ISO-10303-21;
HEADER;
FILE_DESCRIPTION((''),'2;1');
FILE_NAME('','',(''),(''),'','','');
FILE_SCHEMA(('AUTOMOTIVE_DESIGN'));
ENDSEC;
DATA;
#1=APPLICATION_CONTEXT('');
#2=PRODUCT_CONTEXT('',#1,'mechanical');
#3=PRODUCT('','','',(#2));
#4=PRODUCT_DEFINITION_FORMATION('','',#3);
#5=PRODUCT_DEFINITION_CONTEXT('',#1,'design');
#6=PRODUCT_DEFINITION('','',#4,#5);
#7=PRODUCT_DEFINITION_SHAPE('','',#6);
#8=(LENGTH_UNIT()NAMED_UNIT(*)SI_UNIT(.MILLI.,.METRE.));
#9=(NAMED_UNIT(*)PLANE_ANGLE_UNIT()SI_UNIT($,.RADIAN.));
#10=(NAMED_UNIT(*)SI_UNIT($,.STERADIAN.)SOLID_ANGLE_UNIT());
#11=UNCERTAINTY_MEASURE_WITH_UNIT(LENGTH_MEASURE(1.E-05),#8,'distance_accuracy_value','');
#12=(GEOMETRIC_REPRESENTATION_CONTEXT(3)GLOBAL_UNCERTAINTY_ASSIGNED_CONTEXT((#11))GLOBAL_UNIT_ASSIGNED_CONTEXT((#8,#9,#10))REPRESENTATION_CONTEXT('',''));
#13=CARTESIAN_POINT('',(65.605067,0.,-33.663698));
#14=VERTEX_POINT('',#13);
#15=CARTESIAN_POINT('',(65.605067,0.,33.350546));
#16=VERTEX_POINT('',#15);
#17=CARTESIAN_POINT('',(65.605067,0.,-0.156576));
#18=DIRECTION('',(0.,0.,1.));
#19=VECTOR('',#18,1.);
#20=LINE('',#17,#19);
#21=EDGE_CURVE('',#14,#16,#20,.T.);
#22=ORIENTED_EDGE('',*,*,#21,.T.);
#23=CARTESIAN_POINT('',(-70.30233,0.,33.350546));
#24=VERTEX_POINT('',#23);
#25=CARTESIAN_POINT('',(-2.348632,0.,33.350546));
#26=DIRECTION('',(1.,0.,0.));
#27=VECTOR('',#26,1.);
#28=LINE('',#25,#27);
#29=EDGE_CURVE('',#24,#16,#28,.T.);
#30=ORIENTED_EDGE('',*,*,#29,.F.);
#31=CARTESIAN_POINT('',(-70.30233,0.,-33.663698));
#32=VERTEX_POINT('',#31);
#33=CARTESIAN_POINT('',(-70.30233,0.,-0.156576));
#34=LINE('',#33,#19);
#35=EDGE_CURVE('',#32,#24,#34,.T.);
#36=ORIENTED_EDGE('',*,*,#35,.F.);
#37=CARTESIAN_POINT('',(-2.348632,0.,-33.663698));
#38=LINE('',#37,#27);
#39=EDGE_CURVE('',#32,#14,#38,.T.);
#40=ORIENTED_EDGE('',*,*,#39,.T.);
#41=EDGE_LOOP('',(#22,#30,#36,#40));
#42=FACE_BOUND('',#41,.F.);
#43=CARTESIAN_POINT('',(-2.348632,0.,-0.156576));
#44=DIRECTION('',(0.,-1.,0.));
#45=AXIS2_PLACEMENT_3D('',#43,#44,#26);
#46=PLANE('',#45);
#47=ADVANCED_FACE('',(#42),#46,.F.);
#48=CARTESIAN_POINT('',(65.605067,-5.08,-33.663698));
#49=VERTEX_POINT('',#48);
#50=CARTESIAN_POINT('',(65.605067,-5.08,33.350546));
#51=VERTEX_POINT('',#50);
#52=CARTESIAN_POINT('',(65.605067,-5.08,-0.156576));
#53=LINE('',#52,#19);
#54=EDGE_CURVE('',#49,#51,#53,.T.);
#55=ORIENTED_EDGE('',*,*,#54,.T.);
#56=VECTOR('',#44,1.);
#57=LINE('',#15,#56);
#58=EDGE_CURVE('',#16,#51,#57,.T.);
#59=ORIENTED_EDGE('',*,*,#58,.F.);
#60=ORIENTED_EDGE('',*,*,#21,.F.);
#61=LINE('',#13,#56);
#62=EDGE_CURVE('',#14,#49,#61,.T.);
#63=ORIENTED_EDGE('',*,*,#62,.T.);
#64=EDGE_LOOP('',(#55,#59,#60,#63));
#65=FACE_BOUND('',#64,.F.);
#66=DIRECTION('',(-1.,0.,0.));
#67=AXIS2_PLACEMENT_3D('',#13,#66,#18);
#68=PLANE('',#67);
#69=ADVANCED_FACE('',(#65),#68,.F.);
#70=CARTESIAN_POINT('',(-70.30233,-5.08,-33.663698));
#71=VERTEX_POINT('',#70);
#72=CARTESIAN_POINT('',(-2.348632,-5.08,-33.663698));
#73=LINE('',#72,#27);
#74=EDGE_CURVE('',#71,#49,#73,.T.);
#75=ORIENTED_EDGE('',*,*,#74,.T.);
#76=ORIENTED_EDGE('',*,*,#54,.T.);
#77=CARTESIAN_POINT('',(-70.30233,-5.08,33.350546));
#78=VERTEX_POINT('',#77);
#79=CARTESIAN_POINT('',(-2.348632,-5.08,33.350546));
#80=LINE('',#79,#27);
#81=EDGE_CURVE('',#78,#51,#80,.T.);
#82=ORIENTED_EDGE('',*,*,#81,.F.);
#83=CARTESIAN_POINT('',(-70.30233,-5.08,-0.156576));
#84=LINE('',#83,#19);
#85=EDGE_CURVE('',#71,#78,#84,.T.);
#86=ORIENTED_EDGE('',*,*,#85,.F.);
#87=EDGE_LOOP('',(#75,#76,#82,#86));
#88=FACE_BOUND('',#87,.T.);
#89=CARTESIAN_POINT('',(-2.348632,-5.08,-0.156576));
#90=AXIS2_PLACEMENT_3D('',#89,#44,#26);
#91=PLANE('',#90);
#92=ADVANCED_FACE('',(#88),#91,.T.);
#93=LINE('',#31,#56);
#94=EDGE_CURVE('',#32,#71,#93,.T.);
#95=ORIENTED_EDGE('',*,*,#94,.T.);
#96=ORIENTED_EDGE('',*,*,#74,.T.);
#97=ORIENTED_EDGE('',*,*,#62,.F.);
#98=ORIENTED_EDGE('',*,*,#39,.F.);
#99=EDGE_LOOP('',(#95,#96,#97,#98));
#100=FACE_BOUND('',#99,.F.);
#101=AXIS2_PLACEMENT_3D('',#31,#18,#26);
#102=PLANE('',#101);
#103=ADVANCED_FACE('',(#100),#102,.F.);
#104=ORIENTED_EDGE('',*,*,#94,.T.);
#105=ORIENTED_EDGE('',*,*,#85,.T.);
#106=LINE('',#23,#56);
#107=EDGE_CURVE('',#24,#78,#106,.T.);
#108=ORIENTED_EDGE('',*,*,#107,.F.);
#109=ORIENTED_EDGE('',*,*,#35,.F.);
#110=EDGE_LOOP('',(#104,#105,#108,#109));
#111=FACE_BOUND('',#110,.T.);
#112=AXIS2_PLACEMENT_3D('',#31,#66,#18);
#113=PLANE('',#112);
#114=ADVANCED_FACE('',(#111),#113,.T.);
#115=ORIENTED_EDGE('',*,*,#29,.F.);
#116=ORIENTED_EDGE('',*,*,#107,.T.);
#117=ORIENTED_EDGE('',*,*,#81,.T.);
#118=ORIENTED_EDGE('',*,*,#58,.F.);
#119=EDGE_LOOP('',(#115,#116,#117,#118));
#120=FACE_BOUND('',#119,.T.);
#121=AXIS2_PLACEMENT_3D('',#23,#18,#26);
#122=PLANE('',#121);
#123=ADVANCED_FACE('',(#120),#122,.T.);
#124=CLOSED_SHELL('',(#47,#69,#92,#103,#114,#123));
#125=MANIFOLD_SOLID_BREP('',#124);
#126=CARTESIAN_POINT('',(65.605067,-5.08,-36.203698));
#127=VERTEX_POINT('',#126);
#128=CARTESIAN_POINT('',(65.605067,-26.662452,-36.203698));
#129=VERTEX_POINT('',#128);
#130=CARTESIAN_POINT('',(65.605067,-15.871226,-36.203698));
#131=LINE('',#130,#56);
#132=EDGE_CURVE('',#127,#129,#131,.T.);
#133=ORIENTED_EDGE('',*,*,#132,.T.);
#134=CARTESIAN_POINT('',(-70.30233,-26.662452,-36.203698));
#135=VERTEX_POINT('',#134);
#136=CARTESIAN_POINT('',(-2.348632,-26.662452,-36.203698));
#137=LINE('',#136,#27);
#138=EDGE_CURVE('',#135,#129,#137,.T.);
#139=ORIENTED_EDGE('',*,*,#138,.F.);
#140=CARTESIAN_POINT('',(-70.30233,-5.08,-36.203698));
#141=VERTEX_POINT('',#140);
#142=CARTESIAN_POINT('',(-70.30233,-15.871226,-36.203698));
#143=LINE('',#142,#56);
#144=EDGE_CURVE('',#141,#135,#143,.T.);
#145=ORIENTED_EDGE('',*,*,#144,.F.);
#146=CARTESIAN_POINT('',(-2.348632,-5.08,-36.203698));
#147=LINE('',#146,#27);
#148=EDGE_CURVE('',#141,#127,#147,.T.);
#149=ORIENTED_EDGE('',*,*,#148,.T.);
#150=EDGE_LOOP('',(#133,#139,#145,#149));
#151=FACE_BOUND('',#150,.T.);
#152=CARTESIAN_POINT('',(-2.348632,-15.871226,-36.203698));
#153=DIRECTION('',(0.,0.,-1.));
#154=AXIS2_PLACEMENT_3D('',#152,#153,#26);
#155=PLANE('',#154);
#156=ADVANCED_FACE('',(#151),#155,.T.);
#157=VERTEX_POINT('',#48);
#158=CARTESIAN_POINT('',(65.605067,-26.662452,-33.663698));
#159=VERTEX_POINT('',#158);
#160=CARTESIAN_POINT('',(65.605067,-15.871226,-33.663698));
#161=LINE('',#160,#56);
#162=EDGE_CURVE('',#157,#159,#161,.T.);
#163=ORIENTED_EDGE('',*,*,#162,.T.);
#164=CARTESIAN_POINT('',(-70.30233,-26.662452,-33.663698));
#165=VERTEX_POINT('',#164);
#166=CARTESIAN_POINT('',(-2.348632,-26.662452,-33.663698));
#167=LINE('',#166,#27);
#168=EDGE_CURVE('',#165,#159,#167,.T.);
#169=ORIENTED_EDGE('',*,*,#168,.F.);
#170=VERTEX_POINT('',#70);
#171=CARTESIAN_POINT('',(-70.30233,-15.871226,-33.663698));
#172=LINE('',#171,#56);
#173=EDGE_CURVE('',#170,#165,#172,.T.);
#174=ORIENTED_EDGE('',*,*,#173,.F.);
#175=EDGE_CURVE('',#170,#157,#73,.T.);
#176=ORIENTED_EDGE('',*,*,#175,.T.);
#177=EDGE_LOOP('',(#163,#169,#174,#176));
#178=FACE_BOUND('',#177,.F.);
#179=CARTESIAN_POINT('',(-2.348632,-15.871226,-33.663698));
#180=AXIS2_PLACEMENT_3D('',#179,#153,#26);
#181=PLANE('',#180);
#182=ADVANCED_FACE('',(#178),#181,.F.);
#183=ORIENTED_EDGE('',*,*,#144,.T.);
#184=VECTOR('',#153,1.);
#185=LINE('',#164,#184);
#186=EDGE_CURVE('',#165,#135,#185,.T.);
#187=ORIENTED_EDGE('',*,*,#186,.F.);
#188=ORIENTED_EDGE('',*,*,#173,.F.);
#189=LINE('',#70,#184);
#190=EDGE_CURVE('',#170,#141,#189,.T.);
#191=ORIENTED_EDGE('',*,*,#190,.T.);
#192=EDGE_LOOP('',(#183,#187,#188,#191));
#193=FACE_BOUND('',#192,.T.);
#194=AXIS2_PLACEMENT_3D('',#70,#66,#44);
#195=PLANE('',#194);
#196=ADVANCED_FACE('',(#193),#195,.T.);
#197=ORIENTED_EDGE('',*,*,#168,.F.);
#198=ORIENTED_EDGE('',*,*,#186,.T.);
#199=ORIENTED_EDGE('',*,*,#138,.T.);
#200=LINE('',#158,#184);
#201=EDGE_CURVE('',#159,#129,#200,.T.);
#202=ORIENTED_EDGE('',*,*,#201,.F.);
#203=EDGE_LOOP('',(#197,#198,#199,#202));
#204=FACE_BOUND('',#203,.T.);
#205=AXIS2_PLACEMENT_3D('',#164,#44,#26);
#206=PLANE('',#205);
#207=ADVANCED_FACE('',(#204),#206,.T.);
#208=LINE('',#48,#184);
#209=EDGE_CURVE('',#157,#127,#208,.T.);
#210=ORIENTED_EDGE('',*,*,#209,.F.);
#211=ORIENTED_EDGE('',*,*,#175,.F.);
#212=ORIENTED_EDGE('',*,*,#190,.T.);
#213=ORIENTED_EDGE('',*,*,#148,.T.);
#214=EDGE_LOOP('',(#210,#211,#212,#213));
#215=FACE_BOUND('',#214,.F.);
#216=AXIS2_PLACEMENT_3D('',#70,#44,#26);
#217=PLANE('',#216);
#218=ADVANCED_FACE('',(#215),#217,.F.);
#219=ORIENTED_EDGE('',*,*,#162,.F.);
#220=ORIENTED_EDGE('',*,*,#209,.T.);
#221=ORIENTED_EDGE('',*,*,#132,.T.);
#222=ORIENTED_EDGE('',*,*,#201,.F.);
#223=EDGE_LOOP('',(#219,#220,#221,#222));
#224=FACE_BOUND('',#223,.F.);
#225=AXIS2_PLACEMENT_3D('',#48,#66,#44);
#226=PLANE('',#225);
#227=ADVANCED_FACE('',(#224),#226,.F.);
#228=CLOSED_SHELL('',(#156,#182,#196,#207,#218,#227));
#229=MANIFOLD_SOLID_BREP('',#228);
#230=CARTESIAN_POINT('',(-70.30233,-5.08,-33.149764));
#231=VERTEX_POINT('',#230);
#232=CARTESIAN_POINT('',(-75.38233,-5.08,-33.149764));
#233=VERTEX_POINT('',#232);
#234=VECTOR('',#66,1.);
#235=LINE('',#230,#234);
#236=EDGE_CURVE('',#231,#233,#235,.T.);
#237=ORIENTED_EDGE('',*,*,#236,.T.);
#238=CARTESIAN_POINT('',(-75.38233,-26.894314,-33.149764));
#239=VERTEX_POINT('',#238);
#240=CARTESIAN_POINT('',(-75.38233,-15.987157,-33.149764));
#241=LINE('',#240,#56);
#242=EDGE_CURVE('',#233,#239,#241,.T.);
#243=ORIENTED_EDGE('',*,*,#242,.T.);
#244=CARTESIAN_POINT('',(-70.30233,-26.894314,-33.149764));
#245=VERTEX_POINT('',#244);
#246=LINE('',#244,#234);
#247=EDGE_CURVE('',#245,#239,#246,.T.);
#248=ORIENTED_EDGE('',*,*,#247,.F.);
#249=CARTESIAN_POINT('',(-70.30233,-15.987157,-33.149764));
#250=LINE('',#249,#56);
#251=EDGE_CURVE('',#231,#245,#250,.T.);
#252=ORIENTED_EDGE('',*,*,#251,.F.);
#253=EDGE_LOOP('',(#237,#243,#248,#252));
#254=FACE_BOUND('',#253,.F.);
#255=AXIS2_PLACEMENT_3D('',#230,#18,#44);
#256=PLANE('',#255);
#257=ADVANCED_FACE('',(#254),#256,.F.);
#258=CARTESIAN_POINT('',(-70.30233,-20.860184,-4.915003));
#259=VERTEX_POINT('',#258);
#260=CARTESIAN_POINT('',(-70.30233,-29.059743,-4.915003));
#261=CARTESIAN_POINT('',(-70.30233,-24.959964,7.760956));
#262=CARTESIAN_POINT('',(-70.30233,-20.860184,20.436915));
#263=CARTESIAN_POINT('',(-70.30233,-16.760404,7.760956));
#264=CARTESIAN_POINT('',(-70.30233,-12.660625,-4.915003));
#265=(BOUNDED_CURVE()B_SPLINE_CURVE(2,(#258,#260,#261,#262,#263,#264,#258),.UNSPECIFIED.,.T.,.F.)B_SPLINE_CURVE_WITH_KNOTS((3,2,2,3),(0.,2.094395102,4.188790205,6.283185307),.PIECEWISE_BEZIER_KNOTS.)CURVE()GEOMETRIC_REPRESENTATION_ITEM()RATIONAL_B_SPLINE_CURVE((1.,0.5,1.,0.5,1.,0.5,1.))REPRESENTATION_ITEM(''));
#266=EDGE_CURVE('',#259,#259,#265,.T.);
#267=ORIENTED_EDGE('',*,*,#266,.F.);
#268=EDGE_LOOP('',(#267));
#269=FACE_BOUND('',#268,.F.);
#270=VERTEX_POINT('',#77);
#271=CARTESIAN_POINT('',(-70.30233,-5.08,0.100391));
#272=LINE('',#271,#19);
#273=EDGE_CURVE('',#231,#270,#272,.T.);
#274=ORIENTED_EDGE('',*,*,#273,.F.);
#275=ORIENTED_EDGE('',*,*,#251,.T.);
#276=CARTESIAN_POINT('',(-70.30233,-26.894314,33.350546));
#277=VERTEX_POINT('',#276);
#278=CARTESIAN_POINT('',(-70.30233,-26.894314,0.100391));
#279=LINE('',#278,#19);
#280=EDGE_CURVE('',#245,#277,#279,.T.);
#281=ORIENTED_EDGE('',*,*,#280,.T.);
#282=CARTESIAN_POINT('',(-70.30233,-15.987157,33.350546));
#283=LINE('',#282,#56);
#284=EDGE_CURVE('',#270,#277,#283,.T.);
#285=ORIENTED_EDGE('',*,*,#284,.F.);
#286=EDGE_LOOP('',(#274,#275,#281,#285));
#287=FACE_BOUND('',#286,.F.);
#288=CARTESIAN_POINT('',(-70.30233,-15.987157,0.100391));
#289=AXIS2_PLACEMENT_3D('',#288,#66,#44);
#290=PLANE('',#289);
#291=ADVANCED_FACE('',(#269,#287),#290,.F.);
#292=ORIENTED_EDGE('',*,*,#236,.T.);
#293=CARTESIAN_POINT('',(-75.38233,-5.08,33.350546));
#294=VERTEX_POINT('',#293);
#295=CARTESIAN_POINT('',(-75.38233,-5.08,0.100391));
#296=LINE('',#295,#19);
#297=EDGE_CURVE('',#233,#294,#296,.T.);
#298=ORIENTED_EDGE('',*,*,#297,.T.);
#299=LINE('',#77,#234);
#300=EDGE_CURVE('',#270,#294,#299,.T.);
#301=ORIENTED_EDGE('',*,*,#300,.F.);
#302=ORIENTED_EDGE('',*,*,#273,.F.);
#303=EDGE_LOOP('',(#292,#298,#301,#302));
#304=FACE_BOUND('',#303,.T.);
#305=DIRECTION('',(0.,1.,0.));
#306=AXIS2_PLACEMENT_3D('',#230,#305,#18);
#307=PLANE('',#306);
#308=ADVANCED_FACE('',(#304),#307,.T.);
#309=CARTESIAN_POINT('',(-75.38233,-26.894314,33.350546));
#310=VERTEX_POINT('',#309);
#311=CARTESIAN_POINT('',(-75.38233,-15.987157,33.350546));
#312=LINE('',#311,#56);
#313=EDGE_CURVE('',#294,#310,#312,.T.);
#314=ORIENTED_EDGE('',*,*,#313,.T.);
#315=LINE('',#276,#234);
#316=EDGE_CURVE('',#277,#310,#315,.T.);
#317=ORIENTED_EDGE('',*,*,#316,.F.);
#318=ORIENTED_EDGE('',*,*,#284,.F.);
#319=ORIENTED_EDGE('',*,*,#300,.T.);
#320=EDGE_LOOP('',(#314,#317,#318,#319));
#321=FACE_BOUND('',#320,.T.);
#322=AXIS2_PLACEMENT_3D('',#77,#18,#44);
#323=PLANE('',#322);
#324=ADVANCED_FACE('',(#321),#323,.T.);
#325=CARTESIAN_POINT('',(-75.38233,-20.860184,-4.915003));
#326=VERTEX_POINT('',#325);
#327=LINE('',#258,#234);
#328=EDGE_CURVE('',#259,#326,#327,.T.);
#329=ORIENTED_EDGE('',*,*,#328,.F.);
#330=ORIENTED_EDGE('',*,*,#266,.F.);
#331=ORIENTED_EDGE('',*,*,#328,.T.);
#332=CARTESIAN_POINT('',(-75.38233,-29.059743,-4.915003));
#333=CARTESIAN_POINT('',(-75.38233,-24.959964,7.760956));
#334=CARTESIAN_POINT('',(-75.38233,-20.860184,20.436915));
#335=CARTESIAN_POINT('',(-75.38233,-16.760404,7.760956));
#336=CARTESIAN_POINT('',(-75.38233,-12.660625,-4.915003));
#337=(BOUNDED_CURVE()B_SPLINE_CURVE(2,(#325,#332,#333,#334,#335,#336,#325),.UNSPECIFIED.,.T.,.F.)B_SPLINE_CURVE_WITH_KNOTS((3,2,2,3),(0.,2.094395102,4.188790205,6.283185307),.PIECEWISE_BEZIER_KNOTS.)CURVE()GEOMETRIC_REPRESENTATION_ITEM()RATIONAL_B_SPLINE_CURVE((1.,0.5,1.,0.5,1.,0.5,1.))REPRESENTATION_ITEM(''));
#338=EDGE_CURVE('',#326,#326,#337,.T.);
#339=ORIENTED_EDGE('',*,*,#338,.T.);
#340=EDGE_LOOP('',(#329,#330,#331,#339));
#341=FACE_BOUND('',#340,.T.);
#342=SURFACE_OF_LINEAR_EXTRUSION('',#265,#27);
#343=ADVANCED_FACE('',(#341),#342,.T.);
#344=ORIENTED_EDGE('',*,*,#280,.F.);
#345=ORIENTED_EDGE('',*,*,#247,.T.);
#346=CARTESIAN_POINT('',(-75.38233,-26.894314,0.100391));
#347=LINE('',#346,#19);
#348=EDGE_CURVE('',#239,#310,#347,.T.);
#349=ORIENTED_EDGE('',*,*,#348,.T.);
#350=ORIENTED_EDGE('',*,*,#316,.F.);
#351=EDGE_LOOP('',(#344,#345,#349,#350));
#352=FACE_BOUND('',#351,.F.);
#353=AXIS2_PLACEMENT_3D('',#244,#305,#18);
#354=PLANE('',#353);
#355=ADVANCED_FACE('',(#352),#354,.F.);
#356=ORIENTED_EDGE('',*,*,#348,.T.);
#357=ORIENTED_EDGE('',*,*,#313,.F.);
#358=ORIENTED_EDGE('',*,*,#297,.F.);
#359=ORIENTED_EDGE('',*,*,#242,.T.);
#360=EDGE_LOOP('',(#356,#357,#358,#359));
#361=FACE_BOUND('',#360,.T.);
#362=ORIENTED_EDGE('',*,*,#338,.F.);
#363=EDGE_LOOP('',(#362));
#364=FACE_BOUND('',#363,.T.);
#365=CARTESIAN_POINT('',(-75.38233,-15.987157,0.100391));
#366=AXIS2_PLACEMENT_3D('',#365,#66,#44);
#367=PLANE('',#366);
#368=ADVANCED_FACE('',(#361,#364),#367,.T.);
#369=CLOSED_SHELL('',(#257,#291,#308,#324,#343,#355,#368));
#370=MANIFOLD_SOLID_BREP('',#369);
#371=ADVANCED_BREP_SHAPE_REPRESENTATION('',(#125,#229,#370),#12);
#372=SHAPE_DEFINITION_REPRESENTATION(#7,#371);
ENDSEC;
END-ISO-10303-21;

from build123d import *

# Parameters (mm, degrees)
F0_W     = 135.9073966742
F0_H     = 67.0142434537
F1_DEPTH = 5.08
F2_W     = 21.8143142146
F2_H     = 66.5003098547
F3_DEPTH = 5.08
F5_W     = 135.9073966742
F5_H     = 21.5824521464
F6_DEPTH = 2.54


# Not quite as in the source:
# - the program builds the solid bodies; features that only make, move or delete a surface that nothing else refers to are left out


with BuildPart() as f1:
    # F0 (on Front) → F1 (new body)
    with BuildSketch(Plane.XZ):
        with Locations((-2.3486316204, -0.1565758139)):
            Rectangle(F0_W, F0_H)
    extrude(amount=F1_DEPTH)


with BuildPart() as f3:
    # F2 (on face) → F3 (new body)
    with BuildSketch(Plane(origin=(-70.3023299575, 0, 0), x_dir=(0, -1, 0), z_dir=(-1, 0, 0))):
        with Locations((15.9871571073, 0.1003909856)):
            Rectangle(F2_W, F2_H)
        with BuildLine():
            add(Edge.make_bspline(
                [(20.860183984, -4.9150027335), (29.0597432151, -4.9150027335), (24.9599635996, 7.7609560685), (20.860183984, 20.4369148705), (16.7604043685, 7.7609560685), (12.6606247529, -4.9150027335), (20.860183984, -4.9150027335)],
                knots=[0, 0, 0, 2.0943951024, 2.0943951024, 4.1887902048, 4.1887902048, 6.2831853072, 6.2831853072, 6.2831853072], degree=2, weights=[1, 0.5, 1, 0.5, 1, 0.5, 1]))
        make_face(mode=Mode.SUBTRACT)
    extrude(amount=F3_DEPTH)


with BuildPart() as f6:
    # F5 (on face) → F6 (new body)
    with BuildSketch(Plane(origin=(0, 0, -33.6636975408), x_dir=(1, 0, 0), z_dir=(0, 0, -1))):
        with Locations((-2.3486316204, 15.8712260732)):
            Rectangle(F5_W, F5_H)
    extrude(amount=F6_DEPTH)


solid = Compound([f1.part, f3.part, f6.part])
